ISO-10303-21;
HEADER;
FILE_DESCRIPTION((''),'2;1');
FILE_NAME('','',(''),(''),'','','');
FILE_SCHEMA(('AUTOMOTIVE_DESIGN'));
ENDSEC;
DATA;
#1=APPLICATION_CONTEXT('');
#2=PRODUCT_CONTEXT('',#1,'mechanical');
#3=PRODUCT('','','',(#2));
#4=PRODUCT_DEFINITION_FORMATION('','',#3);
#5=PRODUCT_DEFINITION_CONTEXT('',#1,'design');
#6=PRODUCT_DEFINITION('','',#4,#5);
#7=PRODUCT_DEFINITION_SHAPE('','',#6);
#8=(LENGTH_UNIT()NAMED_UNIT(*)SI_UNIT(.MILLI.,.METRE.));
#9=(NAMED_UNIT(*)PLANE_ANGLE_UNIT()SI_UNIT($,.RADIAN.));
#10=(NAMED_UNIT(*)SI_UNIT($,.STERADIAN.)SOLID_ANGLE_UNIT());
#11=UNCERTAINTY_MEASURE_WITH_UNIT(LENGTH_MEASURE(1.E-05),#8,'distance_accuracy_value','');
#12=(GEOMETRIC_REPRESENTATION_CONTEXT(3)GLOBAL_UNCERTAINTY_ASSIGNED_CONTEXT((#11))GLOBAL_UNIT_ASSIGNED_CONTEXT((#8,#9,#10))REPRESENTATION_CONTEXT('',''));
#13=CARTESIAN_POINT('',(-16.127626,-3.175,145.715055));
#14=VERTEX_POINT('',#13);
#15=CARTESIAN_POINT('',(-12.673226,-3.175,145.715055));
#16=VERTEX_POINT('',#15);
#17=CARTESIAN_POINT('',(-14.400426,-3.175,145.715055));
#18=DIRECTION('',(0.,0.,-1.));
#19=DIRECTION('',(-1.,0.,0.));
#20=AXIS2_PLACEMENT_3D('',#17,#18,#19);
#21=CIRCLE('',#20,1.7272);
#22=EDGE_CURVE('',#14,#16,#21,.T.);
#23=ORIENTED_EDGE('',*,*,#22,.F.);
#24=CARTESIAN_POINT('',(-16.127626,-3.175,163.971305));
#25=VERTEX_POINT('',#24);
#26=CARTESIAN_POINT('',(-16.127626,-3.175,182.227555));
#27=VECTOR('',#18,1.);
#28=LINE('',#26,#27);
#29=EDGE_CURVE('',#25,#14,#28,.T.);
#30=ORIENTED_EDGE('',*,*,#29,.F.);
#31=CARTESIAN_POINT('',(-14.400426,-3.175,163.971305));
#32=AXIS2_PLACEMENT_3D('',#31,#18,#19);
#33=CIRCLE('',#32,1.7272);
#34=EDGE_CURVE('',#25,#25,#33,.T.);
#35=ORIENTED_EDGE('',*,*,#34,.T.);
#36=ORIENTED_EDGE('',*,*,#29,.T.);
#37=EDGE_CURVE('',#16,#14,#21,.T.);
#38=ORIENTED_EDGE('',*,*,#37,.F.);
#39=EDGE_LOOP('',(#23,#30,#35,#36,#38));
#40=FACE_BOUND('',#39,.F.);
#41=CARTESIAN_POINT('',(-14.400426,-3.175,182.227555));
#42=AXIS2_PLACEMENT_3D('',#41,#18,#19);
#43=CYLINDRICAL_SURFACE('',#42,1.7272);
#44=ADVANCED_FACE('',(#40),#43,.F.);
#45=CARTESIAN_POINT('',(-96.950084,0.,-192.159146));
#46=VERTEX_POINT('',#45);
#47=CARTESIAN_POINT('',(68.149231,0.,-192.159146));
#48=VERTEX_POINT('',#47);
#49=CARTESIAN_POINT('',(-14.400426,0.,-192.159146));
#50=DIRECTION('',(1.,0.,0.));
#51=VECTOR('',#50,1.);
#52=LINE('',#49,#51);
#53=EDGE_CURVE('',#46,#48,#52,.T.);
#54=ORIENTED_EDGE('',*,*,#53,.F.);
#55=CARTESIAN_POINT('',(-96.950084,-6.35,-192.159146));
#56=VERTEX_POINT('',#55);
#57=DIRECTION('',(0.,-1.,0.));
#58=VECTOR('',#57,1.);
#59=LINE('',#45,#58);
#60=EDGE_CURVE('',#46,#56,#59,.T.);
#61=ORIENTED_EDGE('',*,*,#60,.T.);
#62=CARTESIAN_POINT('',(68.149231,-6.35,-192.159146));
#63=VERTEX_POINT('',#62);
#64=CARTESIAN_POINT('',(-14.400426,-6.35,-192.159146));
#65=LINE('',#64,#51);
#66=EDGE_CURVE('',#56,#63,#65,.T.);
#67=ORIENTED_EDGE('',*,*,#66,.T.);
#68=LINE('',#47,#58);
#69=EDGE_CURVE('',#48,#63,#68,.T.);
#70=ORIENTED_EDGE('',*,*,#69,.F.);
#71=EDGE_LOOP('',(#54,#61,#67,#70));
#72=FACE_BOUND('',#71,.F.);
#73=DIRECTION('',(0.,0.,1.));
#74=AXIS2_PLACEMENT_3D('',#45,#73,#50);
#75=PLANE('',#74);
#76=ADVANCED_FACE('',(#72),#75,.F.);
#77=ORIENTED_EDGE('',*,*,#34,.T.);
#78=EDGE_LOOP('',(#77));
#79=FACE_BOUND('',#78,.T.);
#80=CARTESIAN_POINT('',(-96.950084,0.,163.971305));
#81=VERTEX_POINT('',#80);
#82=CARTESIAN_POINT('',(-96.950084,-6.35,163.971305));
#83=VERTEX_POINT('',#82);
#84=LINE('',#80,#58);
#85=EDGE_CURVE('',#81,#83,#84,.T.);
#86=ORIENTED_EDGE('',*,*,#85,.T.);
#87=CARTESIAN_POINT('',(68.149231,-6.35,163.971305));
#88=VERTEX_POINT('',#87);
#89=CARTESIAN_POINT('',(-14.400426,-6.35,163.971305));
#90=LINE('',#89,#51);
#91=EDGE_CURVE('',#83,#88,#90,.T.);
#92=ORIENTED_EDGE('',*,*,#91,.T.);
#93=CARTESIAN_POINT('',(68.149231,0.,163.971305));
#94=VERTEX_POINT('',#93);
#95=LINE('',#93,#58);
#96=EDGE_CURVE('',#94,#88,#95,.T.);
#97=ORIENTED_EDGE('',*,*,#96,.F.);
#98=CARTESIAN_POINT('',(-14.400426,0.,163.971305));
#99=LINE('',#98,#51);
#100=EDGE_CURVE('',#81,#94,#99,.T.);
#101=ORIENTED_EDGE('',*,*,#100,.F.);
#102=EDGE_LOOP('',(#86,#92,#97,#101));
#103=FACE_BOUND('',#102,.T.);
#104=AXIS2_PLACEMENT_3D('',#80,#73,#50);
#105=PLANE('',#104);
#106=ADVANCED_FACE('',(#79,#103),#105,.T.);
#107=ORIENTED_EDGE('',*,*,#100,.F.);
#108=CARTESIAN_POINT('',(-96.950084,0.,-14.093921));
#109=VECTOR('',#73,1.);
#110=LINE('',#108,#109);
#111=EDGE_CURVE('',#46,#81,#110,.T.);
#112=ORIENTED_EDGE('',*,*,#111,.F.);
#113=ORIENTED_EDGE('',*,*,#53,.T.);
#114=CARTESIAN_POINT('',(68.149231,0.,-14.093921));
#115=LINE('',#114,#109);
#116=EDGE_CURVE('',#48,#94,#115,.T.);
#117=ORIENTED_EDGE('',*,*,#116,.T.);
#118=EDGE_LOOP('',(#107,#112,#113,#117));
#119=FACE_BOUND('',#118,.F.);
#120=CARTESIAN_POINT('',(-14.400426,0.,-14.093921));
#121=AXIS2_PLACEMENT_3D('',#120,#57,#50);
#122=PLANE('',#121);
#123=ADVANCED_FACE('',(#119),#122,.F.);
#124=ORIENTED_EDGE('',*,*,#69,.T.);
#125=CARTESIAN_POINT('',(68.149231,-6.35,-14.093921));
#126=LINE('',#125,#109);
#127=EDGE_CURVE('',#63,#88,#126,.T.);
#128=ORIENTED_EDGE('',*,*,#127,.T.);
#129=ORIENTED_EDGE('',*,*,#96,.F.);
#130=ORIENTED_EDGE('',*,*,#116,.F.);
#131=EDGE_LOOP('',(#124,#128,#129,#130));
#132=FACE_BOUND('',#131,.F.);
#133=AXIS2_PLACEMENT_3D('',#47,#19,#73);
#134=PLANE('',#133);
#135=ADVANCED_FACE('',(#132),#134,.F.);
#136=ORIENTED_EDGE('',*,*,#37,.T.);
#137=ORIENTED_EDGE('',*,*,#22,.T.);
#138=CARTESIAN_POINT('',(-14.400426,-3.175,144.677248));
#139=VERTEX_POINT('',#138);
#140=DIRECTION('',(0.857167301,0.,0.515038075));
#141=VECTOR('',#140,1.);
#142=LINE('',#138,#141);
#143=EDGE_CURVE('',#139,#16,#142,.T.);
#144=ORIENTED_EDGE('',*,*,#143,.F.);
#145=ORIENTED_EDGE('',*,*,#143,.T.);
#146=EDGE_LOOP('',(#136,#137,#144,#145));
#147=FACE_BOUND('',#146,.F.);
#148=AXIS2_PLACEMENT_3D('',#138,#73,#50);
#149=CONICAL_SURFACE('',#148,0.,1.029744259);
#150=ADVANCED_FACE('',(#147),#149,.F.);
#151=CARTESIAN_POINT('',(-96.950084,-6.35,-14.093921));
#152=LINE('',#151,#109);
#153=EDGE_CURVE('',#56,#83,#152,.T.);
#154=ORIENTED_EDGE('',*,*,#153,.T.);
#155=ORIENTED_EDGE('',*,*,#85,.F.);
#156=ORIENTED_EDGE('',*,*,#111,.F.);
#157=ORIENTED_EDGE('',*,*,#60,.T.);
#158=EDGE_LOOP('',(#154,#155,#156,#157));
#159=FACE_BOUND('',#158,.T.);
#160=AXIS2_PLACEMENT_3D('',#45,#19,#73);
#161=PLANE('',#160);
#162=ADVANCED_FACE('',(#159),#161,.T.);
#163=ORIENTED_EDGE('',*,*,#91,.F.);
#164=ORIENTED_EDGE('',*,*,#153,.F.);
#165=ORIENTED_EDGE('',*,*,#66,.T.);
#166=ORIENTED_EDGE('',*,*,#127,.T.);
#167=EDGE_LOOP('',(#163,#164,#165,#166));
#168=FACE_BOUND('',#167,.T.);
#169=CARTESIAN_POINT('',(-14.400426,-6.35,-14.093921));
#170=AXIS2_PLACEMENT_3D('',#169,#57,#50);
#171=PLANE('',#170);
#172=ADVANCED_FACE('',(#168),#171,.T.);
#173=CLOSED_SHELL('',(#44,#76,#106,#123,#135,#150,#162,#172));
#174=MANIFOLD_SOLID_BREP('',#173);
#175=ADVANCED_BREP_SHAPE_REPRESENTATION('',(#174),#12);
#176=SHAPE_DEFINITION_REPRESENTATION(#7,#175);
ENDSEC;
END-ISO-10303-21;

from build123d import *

# Parameters (mm, degrees)
F0_W     = 165.0993153453
F0_H     = 356.130450964
F1_DEPTH = 6.35
F3_D     = 3.4544
F3_DEPTH = 18.25625
F3_TIP   = 1.0378064612


# Not quite as in the source:
# - a length typed as a fraction of an inch, garbled in the dataset ("3 / 203.2 mm" for 3/8 in), is restored


with BuildPart() as f1:
    # F0 (on Front) → F1 (new body)
    with BuildSketch(Plane.XZ):
        with Locations((-14.4004262984, -14.0939205885)):
            Rectangle(F0_W, F0_H)
    extrude(amount=F1_DEPTH)

    # F3
    with Locations(Plane.XY.offset(163.9713048935)):
        with Locations((-14.4004262984, -3.175)):
            Hole(F3_D / 2, depth=F3_DEPTH)
            with Locations((0, 0, -(F3_DEPTH + F3_TIP / 2))):  # 118° drill point
                Cone(0, F3_D / 2, F3_TIP, mode=Mode.SUBTRACT)


solid = f1.part
